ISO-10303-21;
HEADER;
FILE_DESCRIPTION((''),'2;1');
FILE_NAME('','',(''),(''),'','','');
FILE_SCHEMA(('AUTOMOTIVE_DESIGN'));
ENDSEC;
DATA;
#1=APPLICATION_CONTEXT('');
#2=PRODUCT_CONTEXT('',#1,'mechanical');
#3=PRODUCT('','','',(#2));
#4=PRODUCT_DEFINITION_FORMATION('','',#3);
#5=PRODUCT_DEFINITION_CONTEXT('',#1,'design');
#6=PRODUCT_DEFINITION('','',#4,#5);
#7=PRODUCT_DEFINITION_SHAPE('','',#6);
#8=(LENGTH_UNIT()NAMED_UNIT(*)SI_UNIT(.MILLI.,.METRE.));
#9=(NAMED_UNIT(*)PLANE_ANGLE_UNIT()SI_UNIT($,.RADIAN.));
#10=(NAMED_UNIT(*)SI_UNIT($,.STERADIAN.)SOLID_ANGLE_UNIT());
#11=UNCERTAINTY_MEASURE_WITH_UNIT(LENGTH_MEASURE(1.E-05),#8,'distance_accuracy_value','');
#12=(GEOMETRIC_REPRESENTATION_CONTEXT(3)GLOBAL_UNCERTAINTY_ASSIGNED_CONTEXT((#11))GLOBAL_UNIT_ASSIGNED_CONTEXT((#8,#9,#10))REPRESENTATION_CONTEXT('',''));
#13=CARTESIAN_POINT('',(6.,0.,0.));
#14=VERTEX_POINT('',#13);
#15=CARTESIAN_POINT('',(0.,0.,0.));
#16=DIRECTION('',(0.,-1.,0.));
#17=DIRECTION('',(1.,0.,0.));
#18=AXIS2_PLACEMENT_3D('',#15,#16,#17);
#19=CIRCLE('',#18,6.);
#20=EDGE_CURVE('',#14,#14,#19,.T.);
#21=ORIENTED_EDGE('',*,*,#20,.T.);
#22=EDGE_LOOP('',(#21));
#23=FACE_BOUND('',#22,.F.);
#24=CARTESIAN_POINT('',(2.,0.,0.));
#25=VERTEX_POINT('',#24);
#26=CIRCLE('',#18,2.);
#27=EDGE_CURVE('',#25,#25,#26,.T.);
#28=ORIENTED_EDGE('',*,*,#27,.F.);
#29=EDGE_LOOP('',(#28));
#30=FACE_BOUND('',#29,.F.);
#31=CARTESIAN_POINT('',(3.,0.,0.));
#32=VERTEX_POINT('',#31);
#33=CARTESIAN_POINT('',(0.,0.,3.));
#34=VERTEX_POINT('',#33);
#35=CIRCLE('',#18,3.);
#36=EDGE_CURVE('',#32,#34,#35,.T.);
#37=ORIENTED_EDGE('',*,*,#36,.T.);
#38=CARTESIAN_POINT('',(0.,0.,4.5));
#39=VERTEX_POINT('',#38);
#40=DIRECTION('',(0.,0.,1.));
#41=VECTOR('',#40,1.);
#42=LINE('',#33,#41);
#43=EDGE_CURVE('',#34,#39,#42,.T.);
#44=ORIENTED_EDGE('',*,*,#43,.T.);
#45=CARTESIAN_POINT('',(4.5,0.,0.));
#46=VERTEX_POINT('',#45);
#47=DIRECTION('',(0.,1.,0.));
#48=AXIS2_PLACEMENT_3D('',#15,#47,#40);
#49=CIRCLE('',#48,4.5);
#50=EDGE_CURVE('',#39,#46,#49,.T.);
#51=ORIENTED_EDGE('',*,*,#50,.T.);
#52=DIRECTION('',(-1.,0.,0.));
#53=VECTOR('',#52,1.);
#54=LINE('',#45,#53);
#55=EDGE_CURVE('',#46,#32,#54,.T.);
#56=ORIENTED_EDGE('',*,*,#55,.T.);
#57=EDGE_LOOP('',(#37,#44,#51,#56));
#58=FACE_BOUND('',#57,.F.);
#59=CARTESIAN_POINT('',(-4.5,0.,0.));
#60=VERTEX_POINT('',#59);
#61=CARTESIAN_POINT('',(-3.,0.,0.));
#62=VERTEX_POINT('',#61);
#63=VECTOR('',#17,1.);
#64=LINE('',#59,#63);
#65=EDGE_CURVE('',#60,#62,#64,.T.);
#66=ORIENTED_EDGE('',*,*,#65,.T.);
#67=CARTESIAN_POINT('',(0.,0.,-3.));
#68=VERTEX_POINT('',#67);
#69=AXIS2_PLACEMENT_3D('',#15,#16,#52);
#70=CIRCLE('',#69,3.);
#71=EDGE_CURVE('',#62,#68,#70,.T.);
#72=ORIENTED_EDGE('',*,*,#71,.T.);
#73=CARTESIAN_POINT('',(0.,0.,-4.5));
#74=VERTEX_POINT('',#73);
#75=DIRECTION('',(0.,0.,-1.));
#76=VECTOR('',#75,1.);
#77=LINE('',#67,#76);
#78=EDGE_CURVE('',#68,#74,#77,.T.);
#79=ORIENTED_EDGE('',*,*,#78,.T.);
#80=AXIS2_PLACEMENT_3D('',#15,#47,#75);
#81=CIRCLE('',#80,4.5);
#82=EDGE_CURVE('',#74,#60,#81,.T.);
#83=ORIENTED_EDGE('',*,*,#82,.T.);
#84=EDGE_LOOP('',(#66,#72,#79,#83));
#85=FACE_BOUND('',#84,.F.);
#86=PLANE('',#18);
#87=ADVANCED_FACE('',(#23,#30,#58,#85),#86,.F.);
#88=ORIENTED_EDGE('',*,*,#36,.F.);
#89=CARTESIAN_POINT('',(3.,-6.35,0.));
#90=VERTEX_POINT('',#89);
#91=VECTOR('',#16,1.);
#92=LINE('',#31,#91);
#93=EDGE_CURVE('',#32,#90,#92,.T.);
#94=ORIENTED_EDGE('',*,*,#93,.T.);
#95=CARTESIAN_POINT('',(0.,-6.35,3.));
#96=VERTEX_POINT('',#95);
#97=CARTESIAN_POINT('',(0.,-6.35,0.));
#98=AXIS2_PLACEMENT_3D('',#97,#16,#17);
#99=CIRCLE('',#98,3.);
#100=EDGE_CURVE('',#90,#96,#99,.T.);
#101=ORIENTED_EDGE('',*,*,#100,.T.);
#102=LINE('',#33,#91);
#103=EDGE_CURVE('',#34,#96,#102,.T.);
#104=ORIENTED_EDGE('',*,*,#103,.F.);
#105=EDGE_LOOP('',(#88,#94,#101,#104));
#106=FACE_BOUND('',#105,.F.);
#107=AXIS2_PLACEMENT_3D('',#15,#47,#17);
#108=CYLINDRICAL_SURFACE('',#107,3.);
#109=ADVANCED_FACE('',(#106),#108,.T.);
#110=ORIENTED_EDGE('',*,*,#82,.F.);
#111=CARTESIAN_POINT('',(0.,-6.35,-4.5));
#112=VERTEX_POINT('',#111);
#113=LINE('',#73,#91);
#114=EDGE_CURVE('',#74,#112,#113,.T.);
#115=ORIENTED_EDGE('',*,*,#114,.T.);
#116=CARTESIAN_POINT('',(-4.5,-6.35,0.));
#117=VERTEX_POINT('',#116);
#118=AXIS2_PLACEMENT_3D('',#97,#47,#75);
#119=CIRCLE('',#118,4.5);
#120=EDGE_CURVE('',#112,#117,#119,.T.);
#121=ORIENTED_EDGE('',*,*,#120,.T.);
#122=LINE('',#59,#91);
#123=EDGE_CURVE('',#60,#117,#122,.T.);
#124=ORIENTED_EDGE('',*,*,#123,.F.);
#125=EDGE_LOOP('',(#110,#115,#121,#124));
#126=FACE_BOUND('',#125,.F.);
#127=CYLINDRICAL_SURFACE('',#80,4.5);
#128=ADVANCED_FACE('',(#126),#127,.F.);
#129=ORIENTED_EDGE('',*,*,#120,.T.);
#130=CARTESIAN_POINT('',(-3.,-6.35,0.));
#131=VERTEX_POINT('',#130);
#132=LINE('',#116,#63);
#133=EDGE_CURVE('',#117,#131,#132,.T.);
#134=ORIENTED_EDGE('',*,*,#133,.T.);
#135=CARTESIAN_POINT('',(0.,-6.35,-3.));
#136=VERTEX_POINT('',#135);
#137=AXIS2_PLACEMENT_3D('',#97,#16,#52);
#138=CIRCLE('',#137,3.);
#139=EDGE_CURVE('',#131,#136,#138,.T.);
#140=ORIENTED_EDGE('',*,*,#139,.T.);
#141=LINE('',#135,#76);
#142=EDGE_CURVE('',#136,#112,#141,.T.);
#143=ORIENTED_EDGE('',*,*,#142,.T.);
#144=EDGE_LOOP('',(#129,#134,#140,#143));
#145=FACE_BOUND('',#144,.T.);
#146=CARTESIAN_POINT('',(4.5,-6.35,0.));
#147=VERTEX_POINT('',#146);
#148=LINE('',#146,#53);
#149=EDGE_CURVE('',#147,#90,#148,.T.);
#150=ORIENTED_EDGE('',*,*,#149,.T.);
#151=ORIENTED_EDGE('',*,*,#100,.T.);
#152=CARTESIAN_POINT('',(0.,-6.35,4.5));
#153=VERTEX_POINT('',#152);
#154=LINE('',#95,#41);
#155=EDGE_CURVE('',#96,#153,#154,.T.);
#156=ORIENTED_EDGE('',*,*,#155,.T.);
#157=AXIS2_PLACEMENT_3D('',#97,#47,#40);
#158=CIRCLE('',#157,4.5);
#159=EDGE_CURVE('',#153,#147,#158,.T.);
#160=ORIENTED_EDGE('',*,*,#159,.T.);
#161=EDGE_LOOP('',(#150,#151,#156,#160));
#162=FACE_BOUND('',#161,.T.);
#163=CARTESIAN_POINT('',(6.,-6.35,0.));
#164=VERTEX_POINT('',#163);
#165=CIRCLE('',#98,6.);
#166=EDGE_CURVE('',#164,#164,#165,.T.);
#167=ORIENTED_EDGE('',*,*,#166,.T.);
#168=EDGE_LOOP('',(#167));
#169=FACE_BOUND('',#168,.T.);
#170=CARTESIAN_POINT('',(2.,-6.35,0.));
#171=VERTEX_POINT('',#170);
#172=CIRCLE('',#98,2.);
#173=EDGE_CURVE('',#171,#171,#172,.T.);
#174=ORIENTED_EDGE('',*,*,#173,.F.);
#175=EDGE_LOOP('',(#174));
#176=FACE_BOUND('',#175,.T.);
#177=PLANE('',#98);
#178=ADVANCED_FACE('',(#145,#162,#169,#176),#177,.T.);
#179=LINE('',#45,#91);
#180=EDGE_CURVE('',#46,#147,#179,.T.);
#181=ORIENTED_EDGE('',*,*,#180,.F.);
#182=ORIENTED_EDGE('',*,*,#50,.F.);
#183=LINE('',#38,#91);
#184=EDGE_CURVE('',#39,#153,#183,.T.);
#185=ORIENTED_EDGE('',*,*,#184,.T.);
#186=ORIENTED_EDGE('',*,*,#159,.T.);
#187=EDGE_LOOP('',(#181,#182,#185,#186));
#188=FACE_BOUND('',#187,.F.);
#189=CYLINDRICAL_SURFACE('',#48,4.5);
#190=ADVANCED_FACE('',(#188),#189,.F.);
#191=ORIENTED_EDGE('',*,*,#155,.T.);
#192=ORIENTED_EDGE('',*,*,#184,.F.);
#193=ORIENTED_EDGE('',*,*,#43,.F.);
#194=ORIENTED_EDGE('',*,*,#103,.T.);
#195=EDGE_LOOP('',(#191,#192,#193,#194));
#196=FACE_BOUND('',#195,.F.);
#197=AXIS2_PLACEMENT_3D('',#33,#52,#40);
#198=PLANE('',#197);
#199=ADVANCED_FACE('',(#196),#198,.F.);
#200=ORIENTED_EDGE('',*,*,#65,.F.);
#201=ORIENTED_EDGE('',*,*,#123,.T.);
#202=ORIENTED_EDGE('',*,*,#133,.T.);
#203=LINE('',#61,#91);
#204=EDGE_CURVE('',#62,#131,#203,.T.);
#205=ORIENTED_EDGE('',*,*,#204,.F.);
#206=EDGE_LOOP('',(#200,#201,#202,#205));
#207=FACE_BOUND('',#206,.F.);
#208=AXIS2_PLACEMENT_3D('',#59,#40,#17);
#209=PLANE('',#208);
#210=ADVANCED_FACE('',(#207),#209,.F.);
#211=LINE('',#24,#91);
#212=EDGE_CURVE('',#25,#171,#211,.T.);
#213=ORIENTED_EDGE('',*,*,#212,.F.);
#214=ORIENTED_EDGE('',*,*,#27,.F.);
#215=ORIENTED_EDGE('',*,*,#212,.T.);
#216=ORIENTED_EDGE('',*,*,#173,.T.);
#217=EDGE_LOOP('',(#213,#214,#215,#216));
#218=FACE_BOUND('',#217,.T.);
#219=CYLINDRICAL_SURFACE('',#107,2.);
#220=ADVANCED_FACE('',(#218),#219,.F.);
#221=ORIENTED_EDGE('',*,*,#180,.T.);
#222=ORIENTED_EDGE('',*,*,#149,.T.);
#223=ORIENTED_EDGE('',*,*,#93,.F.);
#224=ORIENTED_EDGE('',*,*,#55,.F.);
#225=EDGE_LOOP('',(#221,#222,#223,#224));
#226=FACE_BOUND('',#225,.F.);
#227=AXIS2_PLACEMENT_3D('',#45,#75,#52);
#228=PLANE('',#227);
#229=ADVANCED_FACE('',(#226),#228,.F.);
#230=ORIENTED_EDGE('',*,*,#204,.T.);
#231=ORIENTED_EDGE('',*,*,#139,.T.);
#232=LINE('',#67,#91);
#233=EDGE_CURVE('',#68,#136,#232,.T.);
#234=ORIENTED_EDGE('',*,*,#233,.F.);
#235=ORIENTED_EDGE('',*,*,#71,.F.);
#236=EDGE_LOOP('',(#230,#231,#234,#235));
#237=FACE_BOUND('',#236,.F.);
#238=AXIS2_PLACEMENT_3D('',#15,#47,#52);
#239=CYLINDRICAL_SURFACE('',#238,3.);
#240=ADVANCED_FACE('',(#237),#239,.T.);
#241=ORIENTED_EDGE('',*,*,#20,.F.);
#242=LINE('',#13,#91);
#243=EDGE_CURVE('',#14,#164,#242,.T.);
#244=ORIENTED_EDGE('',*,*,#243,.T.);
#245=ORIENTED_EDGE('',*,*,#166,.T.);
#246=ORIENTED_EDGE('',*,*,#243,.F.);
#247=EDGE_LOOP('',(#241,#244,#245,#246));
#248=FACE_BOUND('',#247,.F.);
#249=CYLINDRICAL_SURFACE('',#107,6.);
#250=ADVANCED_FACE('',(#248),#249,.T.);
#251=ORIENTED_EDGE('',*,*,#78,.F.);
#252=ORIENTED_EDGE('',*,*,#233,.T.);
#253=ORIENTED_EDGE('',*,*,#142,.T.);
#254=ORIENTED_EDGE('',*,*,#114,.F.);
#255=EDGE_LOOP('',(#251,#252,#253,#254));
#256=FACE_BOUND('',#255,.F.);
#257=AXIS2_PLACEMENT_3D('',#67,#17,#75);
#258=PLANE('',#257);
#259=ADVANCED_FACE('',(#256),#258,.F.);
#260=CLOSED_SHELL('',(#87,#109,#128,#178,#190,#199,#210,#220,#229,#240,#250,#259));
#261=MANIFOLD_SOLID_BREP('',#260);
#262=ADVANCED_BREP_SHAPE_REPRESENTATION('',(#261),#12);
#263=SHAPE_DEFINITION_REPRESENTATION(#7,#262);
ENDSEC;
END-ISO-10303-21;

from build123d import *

# Parameters (mm, degrees)
F0_R     = 6
F0_R_2   = 2
F1_DEPTH = 6.35


# Not quite as in the source:
# - a length typed as a fraction of an inch, garbled in the dataset ("3 / 203.2 mm" for 3/8 in), is restored


with BuildPart() as f1:
    # F0 (on Front) → F1 (new body)
    with BuildSketch(Plane.XZ):
        Circle(F0_R)
        with BuildLine():
            ThreePointArc((0, 4.5), (3.1819805153, 3.1819805153), (4.5, 0))
            ThreePointArc((4.5, 0), (3.1819805153, -3.1819805153), (0, -4.5))
            ThreePointArc((0, -4.5), (-3.1819805153, -3.1819805153), (-4.5, 0))
            ThreePointArc((-4.5, 0), (-3.1819805153, 3.1819805153), (0, 4.5))
        make_face(mode=Mode.SUBTRACT)
        with BuildLine():
            ThreePointArc((0, -4.5), (3.1819805153, -3.1819805153), (4.5, 0))
            Line((4.5, 0), (3, 0))
            ThreePointArc((3, 0), (2.1213203436, -2.1213203436), (0, -3))
            Line((0, -3), (0, -4.5))
        make_face()
        with BuildLine():
            ThreePointArc((0, -3), (2.1213203436, -2.1213203436), (3, 0))
            ThreePointArc((3, 0), (2.1213203436, 2.1213203436), (0, 3))
            ThreePointArc((0, 3), (-2.1213203436, 2.1213203436), (-3, 0))
            ThreePointArc((-3, 0), (-2.1213203436, -2.1213203436), (0, -3))
        make_face()
        Circle(F0_R_2, mode=Mode.SUBTRACT)
        with BuildLine():
            Line((0, 3), (0, 4.5))
            ThreePointArc((0, 4.5), (-3.1819805153, 3.1819805153), (-4.5, 0))
            Line((-4.5, 0), (-3, 0))
            ThreePointArc((-3, 0), (-2.1213203436, 2.1213203436), (0, 3))
        make_face()
    extrude(amount=F1_DEPTH)


solid = f1.part
